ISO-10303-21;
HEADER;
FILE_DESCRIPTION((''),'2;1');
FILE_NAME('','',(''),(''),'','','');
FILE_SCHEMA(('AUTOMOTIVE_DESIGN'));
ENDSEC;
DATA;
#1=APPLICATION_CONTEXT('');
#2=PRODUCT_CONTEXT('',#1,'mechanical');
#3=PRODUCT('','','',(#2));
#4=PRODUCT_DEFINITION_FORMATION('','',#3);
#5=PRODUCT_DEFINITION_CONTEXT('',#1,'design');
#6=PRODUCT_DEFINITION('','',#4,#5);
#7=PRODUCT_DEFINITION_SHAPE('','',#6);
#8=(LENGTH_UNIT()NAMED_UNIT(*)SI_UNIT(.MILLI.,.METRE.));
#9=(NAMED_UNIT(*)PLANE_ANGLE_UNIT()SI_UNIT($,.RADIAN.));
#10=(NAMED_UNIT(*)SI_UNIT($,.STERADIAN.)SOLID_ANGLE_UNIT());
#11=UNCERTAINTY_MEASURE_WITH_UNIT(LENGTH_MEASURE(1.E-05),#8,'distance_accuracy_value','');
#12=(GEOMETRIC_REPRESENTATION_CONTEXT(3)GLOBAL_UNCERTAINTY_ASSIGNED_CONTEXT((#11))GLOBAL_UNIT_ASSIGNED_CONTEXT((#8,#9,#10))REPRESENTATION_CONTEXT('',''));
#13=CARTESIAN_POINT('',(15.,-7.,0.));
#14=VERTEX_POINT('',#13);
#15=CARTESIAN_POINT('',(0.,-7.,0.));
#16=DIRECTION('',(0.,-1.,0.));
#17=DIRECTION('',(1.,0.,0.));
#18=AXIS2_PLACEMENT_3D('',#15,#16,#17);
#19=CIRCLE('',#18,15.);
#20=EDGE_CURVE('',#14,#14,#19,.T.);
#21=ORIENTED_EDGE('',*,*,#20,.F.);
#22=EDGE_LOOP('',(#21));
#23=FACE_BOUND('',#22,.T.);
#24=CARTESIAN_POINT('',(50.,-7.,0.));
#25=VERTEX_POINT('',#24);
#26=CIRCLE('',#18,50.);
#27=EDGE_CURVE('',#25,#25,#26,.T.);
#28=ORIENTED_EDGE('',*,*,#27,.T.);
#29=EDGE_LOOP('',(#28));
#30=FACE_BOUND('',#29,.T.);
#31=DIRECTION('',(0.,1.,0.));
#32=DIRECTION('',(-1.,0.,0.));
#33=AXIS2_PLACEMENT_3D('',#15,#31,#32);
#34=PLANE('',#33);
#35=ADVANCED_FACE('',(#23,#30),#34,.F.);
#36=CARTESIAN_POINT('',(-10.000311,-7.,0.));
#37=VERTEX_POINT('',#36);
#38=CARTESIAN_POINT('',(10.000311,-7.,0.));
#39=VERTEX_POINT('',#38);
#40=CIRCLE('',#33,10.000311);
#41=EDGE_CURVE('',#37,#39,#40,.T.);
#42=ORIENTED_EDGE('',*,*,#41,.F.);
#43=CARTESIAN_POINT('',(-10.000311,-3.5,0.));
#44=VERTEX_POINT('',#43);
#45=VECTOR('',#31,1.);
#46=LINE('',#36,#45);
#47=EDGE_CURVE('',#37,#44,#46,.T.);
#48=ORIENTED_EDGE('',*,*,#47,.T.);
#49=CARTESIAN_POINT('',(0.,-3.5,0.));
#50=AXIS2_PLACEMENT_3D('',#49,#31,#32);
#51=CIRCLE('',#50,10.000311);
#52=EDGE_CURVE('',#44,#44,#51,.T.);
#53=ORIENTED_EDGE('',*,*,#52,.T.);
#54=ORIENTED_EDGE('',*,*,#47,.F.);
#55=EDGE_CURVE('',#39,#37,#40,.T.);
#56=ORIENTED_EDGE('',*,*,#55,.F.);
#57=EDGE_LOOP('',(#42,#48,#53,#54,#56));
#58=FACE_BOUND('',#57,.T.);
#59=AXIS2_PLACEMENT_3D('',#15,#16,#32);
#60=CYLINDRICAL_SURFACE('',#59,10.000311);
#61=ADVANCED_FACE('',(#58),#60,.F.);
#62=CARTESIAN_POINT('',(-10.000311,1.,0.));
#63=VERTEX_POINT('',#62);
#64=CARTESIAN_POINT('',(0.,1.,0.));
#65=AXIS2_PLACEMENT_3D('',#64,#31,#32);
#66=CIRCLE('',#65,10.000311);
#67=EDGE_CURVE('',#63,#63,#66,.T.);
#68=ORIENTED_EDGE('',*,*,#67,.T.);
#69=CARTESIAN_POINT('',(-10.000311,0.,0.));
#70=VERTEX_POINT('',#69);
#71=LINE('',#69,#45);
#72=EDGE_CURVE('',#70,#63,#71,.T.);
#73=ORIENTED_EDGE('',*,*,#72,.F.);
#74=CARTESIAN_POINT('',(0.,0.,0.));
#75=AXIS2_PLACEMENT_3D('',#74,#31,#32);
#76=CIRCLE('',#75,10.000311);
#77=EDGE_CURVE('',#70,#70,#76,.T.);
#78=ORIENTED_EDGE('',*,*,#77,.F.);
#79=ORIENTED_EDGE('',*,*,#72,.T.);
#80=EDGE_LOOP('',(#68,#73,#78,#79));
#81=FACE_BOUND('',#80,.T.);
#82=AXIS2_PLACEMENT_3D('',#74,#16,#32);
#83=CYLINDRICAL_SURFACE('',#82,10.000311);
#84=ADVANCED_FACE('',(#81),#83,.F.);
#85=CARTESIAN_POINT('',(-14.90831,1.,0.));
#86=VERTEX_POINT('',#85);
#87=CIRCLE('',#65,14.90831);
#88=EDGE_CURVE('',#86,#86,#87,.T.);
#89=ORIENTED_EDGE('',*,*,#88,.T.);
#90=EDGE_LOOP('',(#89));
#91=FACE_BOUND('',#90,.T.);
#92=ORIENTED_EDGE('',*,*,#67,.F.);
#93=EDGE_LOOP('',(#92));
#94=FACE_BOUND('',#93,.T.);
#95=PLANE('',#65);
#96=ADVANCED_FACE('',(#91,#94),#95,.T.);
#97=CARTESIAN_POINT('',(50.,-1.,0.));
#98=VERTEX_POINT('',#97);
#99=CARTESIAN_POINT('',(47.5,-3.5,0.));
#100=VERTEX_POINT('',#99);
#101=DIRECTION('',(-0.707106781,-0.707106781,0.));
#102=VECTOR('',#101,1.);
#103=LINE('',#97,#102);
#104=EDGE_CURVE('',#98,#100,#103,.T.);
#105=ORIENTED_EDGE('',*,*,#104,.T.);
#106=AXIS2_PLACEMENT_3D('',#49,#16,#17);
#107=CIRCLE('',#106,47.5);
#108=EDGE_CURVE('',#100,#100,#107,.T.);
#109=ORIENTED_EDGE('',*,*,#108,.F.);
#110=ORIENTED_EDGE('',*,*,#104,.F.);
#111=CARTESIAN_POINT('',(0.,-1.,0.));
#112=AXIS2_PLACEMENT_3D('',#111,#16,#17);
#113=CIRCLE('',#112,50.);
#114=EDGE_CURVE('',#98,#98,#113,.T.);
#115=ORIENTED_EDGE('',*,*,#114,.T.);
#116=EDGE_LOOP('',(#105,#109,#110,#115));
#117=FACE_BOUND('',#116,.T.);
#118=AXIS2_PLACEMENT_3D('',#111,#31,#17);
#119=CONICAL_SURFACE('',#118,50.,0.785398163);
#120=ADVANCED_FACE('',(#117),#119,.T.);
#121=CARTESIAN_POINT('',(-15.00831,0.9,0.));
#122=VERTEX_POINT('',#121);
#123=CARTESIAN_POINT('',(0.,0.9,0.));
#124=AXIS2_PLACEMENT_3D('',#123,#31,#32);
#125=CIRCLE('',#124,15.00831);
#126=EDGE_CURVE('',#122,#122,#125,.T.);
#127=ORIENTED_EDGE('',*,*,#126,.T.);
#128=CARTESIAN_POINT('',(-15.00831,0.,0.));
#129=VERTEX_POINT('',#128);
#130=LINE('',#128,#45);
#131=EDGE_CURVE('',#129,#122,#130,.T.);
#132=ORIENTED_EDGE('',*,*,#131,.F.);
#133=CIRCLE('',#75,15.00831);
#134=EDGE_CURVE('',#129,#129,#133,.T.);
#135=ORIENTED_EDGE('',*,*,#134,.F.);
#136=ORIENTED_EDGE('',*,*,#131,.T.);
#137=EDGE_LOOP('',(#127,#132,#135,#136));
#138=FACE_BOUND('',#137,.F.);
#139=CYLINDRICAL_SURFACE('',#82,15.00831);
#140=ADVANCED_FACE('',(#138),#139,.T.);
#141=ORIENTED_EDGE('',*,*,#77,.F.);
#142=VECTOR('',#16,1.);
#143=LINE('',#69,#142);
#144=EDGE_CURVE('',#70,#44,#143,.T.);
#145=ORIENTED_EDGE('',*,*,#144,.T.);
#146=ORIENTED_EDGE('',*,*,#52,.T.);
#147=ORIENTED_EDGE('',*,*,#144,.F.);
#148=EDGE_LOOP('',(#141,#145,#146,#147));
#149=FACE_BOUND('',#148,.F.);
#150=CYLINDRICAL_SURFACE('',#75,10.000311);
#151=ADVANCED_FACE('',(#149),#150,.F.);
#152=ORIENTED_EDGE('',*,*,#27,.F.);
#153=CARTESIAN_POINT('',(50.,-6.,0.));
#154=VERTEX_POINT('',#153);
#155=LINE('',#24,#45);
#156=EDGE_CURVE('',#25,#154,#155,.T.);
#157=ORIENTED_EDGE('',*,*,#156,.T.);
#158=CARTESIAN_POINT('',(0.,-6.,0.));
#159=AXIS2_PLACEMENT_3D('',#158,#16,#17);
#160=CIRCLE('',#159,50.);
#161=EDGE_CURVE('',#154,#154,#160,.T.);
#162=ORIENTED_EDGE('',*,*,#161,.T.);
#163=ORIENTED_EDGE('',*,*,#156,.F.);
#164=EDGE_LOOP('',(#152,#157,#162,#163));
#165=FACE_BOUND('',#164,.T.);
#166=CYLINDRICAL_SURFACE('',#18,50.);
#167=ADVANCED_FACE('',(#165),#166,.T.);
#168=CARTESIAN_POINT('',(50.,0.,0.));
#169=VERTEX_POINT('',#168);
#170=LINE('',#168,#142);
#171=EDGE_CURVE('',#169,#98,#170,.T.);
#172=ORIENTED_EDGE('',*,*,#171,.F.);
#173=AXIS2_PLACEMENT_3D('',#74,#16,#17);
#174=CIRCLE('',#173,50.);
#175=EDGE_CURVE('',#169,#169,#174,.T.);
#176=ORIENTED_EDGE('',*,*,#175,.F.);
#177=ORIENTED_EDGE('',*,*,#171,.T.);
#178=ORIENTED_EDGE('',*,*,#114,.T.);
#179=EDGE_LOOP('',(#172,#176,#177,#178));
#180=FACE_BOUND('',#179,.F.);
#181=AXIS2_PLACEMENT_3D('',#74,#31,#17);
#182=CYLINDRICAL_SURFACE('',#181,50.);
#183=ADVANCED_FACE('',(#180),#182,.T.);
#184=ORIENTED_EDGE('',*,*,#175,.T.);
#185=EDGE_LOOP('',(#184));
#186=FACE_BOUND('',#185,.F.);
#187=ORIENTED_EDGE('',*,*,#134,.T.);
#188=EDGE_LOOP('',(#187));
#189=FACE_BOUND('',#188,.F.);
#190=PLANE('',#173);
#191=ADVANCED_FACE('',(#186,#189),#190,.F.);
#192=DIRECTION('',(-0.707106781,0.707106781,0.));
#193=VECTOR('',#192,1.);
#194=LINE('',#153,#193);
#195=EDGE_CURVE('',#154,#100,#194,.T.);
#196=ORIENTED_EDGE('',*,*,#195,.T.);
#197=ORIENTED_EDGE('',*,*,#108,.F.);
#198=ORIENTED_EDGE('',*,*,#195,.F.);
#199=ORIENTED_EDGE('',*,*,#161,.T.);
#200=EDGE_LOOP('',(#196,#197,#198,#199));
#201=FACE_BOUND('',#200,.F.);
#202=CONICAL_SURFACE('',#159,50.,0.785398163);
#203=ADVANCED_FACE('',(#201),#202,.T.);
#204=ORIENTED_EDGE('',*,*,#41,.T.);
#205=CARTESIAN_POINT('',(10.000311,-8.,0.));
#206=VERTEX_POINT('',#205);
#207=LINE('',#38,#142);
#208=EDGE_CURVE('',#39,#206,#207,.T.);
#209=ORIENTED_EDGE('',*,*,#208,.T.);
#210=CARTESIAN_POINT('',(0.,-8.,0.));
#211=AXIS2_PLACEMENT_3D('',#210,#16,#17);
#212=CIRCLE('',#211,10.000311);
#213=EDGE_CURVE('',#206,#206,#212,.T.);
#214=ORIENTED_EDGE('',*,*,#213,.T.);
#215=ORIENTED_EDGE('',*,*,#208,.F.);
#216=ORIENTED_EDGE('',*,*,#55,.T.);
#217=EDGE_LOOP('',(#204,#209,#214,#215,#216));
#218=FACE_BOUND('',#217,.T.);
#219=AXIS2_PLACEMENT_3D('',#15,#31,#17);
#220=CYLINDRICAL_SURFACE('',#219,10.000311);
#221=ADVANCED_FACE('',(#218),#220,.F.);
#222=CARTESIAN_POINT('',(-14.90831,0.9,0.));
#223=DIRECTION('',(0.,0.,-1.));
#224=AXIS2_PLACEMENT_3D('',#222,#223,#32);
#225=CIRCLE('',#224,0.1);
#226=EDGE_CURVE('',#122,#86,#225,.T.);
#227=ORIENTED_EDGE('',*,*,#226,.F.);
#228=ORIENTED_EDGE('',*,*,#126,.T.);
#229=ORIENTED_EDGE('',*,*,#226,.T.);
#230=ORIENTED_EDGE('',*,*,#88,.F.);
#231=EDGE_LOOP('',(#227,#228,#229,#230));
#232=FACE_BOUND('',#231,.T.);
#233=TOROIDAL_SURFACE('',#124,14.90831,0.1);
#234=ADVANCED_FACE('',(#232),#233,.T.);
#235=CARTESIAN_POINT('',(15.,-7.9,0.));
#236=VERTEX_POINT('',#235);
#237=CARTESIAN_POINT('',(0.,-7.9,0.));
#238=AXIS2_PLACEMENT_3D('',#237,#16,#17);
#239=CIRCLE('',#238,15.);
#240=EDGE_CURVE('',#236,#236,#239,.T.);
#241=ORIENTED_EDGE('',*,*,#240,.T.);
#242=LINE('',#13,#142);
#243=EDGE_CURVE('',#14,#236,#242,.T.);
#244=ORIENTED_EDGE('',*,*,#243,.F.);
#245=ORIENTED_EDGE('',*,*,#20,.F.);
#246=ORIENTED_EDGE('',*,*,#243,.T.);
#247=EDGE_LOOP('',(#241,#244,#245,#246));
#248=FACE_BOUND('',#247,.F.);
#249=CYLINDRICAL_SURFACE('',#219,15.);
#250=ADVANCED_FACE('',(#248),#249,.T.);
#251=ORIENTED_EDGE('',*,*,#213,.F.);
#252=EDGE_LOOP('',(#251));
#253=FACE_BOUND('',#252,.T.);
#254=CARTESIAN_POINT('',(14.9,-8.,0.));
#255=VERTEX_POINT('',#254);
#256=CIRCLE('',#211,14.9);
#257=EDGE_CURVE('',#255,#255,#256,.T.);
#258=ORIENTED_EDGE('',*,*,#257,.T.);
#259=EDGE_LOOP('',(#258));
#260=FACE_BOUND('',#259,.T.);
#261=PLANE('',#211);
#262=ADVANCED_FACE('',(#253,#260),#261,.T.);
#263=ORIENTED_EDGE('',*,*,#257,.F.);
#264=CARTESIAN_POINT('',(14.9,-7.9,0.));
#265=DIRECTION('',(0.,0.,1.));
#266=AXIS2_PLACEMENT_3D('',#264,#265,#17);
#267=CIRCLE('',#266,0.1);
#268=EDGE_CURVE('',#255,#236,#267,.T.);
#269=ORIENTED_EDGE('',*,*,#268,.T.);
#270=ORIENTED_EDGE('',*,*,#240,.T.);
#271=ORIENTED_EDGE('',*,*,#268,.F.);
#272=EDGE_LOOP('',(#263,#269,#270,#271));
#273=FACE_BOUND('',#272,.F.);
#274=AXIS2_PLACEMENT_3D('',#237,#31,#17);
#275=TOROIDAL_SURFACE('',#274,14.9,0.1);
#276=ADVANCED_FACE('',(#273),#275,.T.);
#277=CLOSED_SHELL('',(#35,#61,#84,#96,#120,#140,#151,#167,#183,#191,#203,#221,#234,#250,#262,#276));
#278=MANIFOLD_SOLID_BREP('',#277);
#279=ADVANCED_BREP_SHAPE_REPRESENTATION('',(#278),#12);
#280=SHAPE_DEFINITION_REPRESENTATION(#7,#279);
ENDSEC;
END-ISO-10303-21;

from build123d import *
from build123d import SkipClean  # not in build123d's __all__

# Parameters (mm, degrees)
F0_R     = 50
F1_DEPTH = 3.5
F2_SIZE  = 2.5
F3_R     = 10.0003114876
F4_DEPTH = 3.5
F6_R     = 15
F6_R_2   = 10.0003114876
F7_DEPTH = 1
F8_R     = 15.0083101608
F8_R_2   = 10.0003114876
F9_DEPTH = 1
F10_R    = 0.1


with BuildPart() as f1:
    # F0 (on Front) → F1 (new body)
    with BuildSketch(Plane.XZ):
        Circle(F0_R)
    extrude(amount=F1_DEPTH)

    # F2
    f2_edges = [f1.edges().sort_by_distance(p)[0] for p in [
        (-50, -3.5, 0),
    ]]
    chamfer(f2_edges, length=F2_SIZE)

    # F3 (on face) → F4 (cut)
    with BuildSketch(Plane(origin=(0, 0, 0), x_dir=(-1, 0, 0), z_dir=(0, 1, 0))):
        Circle(F3_R)
    extrude(amount=-F4_DEPTH, mode=Mode.SUBTRACT)

    # F5: F1 across face


with BuildPart() as f1_1:
    add(f1.part, clean=False)
    add(f1.part.mirror(Plane.XZ.offset(3.5)), clean=False)

    # F6 (on face) → F7 (join)
    with BuildSketch(Plane.XZ.offset(7)):
        Circle(F6_R)
        Circle(F6_R_2, mode=Mode.SUBTRACT)
    with SkipClean():  # cleaning this boolean's faces spoils the solid; the shape is the same uncleaned
        extrude(amount=F7_DEPTH)

    # F8 (on face) → F9 (join)
    with BuildSketch(Plane(origin=(0, 0, 0), x_dir=(-1, 0, 0), z_dir=(0, 1, 0))):
        Circle(F8_R)
        Circle(F8_R_2, mode=Mode.SUBTRACT)
    extrude(amount=F9_DEPTH)

    # F10
    f10_edges = [f1_1.edges().sort_by_distance(p)[0] for p in [
        (-15, -8, 0),
        (15.00831, 1, 0),
    ]]
    fillet(f10_edges, radius=F10_R)


solid = f1_1.part
